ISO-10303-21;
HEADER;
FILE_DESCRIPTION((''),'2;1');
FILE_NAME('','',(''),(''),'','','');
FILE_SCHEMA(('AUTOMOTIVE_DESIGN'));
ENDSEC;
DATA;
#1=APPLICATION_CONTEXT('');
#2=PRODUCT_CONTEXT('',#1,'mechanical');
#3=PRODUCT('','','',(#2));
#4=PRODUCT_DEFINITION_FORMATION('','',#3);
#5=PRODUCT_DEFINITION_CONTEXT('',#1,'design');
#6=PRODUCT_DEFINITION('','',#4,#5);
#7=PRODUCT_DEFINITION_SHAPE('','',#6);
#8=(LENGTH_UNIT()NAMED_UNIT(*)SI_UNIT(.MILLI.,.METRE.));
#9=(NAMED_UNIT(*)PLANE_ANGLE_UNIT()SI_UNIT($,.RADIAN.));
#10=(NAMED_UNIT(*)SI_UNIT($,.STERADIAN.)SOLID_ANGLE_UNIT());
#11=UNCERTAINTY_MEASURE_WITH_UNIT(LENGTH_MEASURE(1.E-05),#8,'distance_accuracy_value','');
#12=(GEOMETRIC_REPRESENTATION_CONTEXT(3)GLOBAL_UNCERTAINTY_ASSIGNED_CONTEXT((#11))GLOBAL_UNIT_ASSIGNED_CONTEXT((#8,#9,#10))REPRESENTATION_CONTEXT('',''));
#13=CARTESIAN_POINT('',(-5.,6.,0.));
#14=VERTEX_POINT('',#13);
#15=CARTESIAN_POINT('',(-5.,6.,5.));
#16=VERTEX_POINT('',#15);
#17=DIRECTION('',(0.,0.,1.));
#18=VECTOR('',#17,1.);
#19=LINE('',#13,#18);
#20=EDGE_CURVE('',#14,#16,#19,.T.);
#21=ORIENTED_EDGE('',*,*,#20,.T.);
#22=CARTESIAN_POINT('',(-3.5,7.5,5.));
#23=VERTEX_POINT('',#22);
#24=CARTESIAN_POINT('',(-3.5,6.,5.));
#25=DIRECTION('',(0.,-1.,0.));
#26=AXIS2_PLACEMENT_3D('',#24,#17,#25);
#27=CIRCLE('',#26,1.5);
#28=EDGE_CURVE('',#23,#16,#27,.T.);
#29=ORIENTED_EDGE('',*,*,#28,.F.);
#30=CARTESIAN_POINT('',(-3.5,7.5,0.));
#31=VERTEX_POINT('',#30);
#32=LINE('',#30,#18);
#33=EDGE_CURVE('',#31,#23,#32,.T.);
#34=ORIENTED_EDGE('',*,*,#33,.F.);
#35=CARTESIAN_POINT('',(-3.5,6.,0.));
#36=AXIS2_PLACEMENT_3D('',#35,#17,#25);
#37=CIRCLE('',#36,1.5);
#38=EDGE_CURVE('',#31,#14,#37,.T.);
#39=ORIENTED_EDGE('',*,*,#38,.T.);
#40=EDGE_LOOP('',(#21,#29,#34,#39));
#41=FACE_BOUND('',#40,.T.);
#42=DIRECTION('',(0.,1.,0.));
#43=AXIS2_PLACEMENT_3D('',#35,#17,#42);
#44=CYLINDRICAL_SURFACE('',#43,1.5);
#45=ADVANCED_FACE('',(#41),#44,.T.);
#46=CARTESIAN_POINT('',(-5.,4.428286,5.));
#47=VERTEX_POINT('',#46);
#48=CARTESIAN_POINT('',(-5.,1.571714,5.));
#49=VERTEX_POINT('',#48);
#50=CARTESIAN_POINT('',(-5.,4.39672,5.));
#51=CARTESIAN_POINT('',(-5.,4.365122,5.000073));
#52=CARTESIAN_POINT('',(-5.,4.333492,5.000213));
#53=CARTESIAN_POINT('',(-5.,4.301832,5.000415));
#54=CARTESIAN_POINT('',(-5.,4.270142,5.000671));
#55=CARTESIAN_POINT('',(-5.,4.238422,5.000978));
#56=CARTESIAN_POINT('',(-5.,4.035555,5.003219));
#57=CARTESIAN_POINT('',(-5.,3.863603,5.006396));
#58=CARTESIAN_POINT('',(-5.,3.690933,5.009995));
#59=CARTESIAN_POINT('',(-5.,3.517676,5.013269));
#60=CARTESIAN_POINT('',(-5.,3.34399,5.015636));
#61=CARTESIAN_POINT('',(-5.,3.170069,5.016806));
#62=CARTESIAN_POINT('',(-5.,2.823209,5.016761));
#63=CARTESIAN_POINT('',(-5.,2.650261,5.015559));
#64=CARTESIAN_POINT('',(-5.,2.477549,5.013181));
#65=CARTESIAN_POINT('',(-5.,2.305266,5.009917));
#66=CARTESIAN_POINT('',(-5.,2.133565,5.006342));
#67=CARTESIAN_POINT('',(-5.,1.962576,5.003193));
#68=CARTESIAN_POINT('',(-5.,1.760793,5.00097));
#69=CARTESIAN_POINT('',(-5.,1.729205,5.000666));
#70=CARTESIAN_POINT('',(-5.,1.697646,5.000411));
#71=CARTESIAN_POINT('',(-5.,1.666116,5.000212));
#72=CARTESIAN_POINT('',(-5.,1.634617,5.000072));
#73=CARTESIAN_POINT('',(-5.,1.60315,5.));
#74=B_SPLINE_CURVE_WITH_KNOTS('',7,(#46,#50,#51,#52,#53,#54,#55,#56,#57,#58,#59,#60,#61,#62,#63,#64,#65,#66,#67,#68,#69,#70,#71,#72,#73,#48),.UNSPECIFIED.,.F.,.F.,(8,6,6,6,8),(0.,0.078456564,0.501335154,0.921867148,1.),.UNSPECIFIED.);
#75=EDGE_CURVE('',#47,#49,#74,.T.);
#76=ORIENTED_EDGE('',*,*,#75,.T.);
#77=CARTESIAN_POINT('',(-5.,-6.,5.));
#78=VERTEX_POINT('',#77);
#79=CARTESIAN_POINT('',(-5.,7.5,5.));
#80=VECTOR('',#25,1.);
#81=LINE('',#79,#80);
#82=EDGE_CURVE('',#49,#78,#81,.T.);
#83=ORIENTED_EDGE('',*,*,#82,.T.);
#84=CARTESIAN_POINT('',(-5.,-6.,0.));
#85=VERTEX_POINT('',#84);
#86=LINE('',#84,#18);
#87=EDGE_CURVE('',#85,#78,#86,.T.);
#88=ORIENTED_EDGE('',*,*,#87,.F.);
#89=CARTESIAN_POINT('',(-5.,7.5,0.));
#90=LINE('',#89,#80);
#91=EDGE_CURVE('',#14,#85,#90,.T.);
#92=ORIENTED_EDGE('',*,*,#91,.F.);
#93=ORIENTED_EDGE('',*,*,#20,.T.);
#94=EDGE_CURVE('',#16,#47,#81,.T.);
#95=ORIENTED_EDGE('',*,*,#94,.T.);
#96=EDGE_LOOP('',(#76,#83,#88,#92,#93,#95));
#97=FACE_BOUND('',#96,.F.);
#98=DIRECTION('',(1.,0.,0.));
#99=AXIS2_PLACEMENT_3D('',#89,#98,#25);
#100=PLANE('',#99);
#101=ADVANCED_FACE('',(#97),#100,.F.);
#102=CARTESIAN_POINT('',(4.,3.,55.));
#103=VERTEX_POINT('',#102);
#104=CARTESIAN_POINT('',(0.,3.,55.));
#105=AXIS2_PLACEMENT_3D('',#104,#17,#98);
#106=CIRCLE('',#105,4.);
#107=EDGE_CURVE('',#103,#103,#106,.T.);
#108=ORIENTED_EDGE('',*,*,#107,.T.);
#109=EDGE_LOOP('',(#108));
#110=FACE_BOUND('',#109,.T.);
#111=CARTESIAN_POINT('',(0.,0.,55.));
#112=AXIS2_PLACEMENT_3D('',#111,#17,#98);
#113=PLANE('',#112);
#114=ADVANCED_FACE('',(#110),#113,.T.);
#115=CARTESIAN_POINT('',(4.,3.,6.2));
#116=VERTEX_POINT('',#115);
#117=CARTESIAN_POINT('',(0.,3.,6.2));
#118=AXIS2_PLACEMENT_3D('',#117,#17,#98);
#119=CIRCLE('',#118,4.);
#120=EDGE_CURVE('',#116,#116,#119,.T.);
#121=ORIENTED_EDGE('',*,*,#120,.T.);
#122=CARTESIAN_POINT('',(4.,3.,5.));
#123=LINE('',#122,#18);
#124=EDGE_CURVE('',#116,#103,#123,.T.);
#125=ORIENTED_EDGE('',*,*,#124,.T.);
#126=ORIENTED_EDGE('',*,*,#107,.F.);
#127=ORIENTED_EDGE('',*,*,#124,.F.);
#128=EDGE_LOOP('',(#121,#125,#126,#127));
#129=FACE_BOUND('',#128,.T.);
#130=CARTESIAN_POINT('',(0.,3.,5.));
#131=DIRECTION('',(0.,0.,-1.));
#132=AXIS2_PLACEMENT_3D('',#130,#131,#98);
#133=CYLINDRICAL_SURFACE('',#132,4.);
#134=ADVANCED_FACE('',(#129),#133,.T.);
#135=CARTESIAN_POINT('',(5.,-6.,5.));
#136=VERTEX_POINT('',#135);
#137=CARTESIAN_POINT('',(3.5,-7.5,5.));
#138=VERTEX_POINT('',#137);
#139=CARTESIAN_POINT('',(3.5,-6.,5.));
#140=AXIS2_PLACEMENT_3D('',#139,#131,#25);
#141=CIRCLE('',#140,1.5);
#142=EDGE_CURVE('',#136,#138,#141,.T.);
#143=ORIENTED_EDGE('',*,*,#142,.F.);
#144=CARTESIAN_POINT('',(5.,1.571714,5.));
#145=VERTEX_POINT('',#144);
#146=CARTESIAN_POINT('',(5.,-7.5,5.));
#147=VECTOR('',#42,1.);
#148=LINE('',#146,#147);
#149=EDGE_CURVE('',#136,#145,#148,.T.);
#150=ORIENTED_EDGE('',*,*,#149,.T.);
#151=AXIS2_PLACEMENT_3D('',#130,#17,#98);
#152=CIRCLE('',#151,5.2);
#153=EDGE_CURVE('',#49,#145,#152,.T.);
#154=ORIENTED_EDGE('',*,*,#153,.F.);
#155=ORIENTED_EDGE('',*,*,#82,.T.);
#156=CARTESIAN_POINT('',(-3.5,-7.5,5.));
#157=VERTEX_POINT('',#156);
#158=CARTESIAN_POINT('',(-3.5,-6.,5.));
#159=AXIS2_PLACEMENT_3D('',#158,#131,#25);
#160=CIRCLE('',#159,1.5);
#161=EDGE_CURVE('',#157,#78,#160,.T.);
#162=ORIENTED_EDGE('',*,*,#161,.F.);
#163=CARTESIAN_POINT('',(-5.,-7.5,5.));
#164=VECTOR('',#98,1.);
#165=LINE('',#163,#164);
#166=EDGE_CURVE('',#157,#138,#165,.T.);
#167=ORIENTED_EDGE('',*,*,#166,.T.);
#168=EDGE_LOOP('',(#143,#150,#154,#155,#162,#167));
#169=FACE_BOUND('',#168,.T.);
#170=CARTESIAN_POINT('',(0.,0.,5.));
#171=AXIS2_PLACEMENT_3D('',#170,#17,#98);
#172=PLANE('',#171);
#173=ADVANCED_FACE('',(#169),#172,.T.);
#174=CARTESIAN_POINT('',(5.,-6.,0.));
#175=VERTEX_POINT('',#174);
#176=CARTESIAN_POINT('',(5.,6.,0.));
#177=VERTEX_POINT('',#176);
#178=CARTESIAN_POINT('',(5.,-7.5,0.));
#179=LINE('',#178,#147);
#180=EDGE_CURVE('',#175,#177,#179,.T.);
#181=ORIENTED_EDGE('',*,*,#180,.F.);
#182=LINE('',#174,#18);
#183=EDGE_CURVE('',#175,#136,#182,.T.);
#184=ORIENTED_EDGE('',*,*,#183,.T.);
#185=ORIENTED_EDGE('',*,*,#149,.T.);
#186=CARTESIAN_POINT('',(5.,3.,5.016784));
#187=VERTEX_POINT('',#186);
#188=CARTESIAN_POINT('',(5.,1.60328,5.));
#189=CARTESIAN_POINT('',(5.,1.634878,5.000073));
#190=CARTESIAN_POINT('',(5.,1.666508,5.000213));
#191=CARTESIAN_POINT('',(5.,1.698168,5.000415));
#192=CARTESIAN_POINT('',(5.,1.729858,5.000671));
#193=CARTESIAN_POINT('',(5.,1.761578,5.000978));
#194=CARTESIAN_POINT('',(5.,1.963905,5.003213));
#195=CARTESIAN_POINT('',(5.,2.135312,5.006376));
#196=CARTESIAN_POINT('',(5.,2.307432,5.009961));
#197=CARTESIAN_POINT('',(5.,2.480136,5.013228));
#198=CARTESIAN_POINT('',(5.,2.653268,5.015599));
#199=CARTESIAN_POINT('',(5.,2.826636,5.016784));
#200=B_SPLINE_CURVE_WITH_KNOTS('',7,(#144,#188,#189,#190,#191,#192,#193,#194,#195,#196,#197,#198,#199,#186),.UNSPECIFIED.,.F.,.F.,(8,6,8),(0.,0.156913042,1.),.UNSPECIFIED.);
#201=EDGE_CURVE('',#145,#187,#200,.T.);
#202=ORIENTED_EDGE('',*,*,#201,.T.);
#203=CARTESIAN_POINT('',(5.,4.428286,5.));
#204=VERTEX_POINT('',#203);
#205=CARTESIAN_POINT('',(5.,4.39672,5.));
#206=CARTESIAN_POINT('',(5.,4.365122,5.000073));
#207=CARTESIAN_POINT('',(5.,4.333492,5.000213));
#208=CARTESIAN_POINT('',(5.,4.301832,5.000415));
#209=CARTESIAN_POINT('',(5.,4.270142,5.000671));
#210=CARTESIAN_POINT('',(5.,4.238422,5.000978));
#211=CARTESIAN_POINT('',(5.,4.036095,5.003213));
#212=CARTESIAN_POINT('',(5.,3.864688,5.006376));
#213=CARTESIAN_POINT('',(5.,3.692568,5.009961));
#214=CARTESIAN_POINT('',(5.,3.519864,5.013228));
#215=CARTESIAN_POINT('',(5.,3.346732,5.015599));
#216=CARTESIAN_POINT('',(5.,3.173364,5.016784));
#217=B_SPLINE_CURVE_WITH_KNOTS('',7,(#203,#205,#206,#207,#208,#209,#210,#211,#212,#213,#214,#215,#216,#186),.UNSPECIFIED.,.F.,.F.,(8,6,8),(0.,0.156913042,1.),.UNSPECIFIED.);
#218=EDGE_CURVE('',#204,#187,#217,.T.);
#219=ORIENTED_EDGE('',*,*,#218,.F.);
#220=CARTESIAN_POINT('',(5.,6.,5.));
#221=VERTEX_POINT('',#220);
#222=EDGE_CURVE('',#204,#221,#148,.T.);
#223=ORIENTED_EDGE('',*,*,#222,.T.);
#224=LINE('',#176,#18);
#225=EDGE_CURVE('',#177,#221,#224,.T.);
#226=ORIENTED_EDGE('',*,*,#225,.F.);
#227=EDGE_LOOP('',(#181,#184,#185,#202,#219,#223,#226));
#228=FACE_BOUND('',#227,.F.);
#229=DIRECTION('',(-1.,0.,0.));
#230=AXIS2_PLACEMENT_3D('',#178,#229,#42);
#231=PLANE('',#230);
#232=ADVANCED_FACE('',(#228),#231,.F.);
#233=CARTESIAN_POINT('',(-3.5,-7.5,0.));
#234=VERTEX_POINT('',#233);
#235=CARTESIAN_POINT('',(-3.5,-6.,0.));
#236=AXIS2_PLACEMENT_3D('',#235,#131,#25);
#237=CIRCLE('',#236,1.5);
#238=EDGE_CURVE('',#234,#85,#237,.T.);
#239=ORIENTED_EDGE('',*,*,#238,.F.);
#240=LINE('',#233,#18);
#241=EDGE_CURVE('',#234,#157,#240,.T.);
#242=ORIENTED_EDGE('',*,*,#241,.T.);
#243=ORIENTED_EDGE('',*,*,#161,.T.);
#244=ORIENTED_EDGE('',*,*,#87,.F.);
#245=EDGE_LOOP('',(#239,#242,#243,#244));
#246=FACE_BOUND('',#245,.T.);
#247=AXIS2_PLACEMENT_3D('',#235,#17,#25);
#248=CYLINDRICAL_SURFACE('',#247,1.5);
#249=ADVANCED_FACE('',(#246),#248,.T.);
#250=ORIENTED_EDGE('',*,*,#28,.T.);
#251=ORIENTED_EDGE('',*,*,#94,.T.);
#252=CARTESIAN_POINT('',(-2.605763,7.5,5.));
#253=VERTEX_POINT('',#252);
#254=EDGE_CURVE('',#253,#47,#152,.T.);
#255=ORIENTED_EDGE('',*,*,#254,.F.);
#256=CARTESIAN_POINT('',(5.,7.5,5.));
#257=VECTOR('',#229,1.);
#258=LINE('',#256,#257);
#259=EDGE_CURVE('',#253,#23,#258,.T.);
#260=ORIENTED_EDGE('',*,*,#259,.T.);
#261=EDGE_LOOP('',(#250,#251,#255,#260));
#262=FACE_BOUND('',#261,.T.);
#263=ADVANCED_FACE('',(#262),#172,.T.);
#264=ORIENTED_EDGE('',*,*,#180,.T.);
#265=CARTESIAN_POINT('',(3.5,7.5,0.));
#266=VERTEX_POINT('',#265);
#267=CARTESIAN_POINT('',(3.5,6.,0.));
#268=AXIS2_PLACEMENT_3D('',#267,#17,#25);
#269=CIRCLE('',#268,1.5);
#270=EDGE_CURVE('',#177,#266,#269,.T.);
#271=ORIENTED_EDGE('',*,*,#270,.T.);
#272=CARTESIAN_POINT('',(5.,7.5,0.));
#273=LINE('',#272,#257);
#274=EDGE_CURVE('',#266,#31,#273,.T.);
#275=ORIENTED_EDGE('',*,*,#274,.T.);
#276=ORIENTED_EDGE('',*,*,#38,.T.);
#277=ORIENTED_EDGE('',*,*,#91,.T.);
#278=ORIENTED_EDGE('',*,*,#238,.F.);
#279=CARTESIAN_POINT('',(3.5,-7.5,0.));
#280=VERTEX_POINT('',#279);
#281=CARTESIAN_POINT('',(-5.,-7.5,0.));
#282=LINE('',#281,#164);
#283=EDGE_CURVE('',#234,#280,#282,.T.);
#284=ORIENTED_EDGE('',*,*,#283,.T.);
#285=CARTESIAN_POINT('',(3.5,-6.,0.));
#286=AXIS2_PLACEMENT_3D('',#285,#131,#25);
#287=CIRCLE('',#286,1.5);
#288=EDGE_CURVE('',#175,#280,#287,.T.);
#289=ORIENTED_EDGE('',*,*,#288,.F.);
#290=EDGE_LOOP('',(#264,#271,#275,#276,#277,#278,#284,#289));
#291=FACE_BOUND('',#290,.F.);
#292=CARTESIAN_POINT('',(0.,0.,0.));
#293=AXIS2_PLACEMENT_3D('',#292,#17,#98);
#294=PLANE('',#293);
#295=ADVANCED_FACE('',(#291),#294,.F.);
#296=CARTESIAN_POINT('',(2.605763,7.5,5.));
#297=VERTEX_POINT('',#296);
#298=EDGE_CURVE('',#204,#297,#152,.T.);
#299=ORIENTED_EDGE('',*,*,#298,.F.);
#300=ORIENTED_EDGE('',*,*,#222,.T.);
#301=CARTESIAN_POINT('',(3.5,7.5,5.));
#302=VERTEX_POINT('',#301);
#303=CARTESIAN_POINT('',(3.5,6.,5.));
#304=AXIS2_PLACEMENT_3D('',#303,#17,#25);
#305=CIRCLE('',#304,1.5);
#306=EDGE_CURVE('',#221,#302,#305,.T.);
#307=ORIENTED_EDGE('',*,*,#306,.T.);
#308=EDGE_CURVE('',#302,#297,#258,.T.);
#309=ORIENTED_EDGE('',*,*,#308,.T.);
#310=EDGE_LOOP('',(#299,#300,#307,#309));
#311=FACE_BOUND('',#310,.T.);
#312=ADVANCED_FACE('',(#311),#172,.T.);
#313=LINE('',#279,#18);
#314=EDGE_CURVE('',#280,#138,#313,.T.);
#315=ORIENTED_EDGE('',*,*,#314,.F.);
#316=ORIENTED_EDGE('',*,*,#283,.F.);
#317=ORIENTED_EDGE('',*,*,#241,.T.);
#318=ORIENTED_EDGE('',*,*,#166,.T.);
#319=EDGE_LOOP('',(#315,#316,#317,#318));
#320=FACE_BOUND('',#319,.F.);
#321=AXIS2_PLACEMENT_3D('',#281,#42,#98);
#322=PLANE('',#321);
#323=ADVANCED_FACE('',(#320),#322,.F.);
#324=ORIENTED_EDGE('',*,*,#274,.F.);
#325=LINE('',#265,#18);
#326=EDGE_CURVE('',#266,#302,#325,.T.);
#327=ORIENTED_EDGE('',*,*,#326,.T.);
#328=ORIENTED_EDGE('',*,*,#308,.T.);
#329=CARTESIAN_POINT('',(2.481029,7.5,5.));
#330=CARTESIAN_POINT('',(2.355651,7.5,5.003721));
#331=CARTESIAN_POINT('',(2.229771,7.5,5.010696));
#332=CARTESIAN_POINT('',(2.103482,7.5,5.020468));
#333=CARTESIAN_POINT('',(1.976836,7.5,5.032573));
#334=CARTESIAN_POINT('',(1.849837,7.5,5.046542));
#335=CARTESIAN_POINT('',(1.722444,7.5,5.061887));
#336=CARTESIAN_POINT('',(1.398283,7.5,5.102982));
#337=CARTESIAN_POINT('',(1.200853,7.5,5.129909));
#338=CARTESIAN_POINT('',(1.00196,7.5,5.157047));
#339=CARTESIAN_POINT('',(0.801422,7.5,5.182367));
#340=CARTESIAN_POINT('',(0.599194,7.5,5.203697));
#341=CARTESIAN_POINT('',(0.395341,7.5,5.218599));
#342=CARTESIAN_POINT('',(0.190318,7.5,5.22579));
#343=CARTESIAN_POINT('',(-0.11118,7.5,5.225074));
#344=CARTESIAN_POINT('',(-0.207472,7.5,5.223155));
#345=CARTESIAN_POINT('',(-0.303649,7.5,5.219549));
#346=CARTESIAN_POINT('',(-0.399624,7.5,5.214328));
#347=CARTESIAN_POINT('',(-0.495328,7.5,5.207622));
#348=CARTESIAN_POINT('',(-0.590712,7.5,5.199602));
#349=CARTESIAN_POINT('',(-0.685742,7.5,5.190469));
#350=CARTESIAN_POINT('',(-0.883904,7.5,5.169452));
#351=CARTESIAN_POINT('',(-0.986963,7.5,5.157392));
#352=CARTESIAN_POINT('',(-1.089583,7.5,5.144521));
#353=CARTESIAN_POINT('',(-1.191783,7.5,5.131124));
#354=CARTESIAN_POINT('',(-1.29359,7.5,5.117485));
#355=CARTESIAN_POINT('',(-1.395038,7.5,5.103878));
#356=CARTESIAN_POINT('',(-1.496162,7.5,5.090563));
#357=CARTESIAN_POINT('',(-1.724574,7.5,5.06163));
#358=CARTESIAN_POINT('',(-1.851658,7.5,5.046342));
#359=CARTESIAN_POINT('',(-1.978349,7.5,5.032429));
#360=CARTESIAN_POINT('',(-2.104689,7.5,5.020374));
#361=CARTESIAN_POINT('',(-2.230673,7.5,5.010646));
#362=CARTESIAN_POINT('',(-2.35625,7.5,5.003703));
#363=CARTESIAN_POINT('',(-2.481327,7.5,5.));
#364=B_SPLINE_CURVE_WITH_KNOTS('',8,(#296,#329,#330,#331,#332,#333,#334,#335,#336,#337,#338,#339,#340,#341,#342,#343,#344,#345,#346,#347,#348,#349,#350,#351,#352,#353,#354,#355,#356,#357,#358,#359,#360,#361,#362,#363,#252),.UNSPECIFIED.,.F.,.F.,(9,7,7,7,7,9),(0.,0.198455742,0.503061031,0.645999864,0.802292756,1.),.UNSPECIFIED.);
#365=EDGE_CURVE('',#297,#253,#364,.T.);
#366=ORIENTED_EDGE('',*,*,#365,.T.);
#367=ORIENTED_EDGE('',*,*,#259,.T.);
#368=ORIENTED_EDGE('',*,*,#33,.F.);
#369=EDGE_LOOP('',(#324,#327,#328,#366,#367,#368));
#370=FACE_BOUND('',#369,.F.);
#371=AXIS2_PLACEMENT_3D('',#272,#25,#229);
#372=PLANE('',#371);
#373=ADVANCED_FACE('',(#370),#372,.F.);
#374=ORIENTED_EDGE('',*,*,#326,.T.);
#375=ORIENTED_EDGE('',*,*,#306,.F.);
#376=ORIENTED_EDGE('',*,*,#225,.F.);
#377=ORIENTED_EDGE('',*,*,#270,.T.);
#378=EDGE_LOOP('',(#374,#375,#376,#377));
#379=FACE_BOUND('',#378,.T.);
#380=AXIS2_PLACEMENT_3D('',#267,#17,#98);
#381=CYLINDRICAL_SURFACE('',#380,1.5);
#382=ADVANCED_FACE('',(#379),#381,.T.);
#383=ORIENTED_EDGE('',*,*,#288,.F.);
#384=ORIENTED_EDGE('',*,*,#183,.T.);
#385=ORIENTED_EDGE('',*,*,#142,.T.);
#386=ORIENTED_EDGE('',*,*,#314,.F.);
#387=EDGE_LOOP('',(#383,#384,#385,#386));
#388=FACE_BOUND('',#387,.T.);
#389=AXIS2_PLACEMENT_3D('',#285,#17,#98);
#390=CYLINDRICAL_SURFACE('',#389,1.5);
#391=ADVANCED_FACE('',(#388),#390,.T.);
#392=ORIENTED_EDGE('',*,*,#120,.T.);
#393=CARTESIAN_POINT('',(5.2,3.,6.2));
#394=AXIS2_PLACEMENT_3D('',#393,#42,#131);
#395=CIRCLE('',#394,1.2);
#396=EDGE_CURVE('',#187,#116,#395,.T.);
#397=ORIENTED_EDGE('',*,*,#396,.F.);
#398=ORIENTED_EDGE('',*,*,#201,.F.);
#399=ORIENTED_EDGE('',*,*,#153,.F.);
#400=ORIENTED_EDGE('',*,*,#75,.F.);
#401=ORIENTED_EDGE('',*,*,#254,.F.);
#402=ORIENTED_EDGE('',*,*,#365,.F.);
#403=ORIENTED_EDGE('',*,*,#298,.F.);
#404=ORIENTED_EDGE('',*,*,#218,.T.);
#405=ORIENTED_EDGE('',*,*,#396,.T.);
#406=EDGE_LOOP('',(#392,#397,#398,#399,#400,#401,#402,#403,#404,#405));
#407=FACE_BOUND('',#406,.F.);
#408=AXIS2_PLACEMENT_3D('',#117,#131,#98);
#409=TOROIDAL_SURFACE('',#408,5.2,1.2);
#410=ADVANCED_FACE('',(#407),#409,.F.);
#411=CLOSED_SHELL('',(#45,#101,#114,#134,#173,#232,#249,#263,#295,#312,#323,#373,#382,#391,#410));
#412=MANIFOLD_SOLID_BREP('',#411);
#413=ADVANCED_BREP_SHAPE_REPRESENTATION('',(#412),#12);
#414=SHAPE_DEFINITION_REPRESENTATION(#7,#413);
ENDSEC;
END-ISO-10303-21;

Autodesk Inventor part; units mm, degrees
ref_plane "YZ Plane" through (0, 0, 0) normal (1, 0, 0) x (0, 1, 0)
ref_plane "XZ Plane" through (0, 0, 0) normal (0, 1, 0) x (-1, 0, 0)
ref_plane "XY Plane" through (0, 0, 0) normal (0, 0, 1) x (1, 0, 0)
sketch "スケッチ1" plane through (0, 0, 0) normal (0, 0, 1) x (1, 0, 0)
  line L0 (5, 7.5) -> (-5, 7.5)
  line L1 (-5, 7.5) -> (-5, -7.5)
  line L2 (-5, -7.5) -> (5, -7.5)
  line L3 (5, -7.5) -> (5, 7.5)
  line L4 (5, 7.5) -> (-5, -7.5) construction
  line L5 (-5, 7.5) -> (5, -7.5) construction
  point P0 (0, 0)
  dimension "d0" = 10
  dimension "d1" = 15
extrude "押し出し1" add sketch "スケッチ1" along normal blind 5
sketch "スケッチ2" plane through (0, 0, 5) normal (0, 0, 1) x (1, 0, 0)
  line L0 (0, 0) -> (0, 3)
  circle A0 centre (0, 3) radius 4
  dimension "d4" = 3
  dimension "d5" = 8
extrude "押し出し2" add sketch "スケッチ2" along normal blind 50
fillet "フィレット1" radius 1.2 1 edges at (-4, 3, 5)
fillet "フィレット2" radius 1.5 4 edges at (5, 7.5, 2.5) (-5, 7.5, 2.5) (5, -7.5, 2.5) (-5, -7.5, 2.5)
properties part number "slidev"
